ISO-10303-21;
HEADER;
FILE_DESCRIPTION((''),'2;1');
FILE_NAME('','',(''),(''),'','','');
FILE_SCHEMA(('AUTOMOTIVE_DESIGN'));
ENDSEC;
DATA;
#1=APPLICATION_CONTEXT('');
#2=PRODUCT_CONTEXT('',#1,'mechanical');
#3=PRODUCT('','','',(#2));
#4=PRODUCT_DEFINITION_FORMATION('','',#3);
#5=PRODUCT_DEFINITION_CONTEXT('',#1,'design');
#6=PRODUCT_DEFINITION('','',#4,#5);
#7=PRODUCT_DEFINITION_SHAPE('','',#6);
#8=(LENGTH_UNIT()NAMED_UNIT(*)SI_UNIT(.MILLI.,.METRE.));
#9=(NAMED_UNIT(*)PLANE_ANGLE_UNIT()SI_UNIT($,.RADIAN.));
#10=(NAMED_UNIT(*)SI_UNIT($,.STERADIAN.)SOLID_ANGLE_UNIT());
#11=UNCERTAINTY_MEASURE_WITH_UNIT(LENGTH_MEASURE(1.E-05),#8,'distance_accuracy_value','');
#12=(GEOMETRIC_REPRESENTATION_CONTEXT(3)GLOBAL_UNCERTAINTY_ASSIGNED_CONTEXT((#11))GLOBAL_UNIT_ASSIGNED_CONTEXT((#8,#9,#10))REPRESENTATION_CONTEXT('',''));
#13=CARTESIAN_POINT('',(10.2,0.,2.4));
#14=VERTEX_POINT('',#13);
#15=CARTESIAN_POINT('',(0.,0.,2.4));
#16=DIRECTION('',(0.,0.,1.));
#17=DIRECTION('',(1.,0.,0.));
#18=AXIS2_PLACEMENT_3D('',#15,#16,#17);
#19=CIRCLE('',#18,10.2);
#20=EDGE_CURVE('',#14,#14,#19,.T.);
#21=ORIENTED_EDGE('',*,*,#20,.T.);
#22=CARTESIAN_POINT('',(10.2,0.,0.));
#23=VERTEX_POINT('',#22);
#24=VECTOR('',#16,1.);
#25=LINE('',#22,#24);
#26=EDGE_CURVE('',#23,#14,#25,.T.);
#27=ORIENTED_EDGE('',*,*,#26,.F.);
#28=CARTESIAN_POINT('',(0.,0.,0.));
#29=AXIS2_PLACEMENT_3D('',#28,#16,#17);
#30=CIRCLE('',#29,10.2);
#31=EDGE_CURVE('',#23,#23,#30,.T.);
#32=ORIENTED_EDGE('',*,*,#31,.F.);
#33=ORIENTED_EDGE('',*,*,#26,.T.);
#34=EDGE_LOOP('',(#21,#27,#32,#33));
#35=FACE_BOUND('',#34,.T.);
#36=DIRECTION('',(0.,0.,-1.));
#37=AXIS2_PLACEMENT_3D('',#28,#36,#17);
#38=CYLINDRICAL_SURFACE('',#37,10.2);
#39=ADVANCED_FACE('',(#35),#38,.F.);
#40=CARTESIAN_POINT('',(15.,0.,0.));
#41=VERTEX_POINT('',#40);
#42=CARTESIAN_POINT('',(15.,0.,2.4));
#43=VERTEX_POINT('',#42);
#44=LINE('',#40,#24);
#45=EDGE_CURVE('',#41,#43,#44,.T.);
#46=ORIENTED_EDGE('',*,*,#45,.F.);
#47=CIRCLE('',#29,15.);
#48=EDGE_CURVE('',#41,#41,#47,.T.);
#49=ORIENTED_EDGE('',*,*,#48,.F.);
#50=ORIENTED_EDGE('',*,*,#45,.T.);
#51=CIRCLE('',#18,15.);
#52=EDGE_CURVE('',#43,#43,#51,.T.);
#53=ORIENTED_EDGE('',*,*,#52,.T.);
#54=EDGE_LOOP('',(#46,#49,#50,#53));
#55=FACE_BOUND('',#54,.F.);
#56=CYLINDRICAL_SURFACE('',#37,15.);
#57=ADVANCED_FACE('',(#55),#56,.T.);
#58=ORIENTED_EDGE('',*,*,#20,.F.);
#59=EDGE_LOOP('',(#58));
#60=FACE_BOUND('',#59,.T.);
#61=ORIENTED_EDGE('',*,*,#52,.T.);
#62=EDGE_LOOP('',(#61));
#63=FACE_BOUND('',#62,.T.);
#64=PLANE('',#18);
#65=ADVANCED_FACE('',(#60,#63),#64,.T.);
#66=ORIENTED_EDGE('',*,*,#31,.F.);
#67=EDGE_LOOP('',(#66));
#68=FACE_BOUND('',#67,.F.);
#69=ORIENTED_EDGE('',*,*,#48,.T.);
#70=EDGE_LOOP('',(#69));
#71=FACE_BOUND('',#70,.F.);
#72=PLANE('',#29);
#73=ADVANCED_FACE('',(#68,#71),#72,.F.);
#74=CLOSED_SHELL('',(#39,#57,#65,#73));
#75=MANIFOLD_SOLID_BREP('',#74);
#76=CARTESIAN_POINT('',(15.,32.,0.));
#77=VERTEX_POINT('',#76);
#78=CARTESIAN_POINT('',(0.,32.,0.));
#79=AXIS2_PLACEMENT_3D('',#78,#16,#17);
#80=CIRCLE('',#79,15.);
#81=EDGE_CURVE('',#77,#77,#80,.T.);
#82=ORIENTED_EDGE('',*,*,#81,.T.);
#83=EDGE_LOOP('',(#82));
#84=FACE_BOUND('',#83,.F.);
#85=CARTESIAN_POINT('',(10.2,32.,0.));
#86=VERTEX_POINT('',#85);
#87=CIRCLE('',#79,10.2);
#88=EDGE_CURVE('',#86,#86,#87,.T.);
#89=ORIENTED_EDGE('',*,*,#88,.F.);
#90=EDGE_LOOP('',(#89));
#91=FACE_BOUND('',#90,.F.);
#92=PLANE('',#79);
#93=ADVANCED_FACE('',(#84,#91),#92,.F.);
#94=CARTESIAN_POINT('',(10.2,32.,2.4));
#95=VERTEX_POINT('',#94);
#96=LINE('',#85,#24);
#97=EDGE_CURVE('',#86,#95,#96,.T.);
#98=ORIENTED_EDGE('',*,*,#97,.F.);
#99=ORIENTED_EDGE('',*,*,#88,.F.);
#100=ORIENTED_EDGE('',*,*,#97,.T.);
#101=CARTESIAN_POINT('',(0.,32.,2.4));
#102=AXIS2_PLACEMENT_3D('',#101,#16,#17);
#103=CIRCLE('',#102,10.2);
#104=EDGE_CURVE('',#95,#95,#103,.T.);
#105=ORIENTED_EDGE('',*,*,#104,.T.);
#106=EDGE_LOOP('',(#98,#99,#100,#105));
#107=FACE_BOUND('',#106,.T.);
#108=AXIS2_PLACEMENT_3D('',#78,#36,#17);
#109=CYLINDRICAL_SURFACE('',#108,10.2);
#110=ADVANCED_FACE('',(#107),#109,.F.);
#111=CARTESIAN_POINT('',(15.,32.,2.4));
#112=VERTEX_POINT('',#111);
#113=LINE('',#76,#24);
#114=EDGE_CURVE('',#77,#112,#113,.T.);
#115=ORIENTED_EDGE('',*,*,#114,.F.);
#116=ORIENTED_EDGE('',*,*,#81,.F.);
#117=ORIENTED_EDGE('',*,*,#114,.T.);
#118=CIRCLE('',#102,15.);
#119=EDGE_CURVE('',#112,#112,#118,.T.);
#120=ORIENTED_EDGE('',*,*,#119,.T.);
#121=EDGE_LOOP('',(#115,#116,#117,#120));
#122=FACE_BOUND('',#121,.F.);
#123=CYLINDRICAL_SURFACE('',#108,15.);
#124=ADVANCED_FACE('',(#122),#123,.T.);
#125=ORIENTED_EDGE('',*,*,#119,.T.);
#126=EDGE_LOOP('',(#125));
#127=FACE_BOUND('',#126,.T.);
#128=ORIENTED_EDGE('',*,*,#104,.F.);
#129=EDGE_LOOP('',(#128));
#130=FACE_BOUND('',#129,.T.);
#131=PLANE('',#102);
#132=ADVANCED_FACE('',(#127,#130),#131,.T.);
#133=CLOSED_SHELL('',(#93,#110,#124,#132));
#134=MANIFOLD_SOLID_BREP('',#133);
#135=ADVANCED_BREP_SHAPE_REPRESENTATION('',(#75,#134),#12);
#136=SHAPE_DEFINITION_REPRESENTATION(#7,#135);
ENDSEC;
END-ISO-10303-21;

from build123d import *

# Parameters (mm, degrees)
F0_R     = 15
F0_R_2   = 10.2
F1_DEPTH = 2.4


# Not quite as in the source:
# - a feature names something its author has since deleted; it is built from what else it names


with BuildPart() as f1:
    # F0 (on Top) → F1 (new body)
    with BuildSketch(Plane.XY):
        with Locations((0, 32)):
            Circle(F0_R)
        with Locations((0, 32)):
            Circle(F0_R_2, mode=Mode.SUBTRACT)
    extrude(amount=F1_DEPTH)


with BuildPart() as f1b:
    # F0 (on Top) → F1, piece 2 (new body)
    with BuildSketch(Plane.XY):
        Circle(F0_R)
        Circle(F0_R_2, mode=Mode.SUBTRACT)
    extrude(amount=F1_DEPTH)


solid = Compound([f1.part, f1b.part])
